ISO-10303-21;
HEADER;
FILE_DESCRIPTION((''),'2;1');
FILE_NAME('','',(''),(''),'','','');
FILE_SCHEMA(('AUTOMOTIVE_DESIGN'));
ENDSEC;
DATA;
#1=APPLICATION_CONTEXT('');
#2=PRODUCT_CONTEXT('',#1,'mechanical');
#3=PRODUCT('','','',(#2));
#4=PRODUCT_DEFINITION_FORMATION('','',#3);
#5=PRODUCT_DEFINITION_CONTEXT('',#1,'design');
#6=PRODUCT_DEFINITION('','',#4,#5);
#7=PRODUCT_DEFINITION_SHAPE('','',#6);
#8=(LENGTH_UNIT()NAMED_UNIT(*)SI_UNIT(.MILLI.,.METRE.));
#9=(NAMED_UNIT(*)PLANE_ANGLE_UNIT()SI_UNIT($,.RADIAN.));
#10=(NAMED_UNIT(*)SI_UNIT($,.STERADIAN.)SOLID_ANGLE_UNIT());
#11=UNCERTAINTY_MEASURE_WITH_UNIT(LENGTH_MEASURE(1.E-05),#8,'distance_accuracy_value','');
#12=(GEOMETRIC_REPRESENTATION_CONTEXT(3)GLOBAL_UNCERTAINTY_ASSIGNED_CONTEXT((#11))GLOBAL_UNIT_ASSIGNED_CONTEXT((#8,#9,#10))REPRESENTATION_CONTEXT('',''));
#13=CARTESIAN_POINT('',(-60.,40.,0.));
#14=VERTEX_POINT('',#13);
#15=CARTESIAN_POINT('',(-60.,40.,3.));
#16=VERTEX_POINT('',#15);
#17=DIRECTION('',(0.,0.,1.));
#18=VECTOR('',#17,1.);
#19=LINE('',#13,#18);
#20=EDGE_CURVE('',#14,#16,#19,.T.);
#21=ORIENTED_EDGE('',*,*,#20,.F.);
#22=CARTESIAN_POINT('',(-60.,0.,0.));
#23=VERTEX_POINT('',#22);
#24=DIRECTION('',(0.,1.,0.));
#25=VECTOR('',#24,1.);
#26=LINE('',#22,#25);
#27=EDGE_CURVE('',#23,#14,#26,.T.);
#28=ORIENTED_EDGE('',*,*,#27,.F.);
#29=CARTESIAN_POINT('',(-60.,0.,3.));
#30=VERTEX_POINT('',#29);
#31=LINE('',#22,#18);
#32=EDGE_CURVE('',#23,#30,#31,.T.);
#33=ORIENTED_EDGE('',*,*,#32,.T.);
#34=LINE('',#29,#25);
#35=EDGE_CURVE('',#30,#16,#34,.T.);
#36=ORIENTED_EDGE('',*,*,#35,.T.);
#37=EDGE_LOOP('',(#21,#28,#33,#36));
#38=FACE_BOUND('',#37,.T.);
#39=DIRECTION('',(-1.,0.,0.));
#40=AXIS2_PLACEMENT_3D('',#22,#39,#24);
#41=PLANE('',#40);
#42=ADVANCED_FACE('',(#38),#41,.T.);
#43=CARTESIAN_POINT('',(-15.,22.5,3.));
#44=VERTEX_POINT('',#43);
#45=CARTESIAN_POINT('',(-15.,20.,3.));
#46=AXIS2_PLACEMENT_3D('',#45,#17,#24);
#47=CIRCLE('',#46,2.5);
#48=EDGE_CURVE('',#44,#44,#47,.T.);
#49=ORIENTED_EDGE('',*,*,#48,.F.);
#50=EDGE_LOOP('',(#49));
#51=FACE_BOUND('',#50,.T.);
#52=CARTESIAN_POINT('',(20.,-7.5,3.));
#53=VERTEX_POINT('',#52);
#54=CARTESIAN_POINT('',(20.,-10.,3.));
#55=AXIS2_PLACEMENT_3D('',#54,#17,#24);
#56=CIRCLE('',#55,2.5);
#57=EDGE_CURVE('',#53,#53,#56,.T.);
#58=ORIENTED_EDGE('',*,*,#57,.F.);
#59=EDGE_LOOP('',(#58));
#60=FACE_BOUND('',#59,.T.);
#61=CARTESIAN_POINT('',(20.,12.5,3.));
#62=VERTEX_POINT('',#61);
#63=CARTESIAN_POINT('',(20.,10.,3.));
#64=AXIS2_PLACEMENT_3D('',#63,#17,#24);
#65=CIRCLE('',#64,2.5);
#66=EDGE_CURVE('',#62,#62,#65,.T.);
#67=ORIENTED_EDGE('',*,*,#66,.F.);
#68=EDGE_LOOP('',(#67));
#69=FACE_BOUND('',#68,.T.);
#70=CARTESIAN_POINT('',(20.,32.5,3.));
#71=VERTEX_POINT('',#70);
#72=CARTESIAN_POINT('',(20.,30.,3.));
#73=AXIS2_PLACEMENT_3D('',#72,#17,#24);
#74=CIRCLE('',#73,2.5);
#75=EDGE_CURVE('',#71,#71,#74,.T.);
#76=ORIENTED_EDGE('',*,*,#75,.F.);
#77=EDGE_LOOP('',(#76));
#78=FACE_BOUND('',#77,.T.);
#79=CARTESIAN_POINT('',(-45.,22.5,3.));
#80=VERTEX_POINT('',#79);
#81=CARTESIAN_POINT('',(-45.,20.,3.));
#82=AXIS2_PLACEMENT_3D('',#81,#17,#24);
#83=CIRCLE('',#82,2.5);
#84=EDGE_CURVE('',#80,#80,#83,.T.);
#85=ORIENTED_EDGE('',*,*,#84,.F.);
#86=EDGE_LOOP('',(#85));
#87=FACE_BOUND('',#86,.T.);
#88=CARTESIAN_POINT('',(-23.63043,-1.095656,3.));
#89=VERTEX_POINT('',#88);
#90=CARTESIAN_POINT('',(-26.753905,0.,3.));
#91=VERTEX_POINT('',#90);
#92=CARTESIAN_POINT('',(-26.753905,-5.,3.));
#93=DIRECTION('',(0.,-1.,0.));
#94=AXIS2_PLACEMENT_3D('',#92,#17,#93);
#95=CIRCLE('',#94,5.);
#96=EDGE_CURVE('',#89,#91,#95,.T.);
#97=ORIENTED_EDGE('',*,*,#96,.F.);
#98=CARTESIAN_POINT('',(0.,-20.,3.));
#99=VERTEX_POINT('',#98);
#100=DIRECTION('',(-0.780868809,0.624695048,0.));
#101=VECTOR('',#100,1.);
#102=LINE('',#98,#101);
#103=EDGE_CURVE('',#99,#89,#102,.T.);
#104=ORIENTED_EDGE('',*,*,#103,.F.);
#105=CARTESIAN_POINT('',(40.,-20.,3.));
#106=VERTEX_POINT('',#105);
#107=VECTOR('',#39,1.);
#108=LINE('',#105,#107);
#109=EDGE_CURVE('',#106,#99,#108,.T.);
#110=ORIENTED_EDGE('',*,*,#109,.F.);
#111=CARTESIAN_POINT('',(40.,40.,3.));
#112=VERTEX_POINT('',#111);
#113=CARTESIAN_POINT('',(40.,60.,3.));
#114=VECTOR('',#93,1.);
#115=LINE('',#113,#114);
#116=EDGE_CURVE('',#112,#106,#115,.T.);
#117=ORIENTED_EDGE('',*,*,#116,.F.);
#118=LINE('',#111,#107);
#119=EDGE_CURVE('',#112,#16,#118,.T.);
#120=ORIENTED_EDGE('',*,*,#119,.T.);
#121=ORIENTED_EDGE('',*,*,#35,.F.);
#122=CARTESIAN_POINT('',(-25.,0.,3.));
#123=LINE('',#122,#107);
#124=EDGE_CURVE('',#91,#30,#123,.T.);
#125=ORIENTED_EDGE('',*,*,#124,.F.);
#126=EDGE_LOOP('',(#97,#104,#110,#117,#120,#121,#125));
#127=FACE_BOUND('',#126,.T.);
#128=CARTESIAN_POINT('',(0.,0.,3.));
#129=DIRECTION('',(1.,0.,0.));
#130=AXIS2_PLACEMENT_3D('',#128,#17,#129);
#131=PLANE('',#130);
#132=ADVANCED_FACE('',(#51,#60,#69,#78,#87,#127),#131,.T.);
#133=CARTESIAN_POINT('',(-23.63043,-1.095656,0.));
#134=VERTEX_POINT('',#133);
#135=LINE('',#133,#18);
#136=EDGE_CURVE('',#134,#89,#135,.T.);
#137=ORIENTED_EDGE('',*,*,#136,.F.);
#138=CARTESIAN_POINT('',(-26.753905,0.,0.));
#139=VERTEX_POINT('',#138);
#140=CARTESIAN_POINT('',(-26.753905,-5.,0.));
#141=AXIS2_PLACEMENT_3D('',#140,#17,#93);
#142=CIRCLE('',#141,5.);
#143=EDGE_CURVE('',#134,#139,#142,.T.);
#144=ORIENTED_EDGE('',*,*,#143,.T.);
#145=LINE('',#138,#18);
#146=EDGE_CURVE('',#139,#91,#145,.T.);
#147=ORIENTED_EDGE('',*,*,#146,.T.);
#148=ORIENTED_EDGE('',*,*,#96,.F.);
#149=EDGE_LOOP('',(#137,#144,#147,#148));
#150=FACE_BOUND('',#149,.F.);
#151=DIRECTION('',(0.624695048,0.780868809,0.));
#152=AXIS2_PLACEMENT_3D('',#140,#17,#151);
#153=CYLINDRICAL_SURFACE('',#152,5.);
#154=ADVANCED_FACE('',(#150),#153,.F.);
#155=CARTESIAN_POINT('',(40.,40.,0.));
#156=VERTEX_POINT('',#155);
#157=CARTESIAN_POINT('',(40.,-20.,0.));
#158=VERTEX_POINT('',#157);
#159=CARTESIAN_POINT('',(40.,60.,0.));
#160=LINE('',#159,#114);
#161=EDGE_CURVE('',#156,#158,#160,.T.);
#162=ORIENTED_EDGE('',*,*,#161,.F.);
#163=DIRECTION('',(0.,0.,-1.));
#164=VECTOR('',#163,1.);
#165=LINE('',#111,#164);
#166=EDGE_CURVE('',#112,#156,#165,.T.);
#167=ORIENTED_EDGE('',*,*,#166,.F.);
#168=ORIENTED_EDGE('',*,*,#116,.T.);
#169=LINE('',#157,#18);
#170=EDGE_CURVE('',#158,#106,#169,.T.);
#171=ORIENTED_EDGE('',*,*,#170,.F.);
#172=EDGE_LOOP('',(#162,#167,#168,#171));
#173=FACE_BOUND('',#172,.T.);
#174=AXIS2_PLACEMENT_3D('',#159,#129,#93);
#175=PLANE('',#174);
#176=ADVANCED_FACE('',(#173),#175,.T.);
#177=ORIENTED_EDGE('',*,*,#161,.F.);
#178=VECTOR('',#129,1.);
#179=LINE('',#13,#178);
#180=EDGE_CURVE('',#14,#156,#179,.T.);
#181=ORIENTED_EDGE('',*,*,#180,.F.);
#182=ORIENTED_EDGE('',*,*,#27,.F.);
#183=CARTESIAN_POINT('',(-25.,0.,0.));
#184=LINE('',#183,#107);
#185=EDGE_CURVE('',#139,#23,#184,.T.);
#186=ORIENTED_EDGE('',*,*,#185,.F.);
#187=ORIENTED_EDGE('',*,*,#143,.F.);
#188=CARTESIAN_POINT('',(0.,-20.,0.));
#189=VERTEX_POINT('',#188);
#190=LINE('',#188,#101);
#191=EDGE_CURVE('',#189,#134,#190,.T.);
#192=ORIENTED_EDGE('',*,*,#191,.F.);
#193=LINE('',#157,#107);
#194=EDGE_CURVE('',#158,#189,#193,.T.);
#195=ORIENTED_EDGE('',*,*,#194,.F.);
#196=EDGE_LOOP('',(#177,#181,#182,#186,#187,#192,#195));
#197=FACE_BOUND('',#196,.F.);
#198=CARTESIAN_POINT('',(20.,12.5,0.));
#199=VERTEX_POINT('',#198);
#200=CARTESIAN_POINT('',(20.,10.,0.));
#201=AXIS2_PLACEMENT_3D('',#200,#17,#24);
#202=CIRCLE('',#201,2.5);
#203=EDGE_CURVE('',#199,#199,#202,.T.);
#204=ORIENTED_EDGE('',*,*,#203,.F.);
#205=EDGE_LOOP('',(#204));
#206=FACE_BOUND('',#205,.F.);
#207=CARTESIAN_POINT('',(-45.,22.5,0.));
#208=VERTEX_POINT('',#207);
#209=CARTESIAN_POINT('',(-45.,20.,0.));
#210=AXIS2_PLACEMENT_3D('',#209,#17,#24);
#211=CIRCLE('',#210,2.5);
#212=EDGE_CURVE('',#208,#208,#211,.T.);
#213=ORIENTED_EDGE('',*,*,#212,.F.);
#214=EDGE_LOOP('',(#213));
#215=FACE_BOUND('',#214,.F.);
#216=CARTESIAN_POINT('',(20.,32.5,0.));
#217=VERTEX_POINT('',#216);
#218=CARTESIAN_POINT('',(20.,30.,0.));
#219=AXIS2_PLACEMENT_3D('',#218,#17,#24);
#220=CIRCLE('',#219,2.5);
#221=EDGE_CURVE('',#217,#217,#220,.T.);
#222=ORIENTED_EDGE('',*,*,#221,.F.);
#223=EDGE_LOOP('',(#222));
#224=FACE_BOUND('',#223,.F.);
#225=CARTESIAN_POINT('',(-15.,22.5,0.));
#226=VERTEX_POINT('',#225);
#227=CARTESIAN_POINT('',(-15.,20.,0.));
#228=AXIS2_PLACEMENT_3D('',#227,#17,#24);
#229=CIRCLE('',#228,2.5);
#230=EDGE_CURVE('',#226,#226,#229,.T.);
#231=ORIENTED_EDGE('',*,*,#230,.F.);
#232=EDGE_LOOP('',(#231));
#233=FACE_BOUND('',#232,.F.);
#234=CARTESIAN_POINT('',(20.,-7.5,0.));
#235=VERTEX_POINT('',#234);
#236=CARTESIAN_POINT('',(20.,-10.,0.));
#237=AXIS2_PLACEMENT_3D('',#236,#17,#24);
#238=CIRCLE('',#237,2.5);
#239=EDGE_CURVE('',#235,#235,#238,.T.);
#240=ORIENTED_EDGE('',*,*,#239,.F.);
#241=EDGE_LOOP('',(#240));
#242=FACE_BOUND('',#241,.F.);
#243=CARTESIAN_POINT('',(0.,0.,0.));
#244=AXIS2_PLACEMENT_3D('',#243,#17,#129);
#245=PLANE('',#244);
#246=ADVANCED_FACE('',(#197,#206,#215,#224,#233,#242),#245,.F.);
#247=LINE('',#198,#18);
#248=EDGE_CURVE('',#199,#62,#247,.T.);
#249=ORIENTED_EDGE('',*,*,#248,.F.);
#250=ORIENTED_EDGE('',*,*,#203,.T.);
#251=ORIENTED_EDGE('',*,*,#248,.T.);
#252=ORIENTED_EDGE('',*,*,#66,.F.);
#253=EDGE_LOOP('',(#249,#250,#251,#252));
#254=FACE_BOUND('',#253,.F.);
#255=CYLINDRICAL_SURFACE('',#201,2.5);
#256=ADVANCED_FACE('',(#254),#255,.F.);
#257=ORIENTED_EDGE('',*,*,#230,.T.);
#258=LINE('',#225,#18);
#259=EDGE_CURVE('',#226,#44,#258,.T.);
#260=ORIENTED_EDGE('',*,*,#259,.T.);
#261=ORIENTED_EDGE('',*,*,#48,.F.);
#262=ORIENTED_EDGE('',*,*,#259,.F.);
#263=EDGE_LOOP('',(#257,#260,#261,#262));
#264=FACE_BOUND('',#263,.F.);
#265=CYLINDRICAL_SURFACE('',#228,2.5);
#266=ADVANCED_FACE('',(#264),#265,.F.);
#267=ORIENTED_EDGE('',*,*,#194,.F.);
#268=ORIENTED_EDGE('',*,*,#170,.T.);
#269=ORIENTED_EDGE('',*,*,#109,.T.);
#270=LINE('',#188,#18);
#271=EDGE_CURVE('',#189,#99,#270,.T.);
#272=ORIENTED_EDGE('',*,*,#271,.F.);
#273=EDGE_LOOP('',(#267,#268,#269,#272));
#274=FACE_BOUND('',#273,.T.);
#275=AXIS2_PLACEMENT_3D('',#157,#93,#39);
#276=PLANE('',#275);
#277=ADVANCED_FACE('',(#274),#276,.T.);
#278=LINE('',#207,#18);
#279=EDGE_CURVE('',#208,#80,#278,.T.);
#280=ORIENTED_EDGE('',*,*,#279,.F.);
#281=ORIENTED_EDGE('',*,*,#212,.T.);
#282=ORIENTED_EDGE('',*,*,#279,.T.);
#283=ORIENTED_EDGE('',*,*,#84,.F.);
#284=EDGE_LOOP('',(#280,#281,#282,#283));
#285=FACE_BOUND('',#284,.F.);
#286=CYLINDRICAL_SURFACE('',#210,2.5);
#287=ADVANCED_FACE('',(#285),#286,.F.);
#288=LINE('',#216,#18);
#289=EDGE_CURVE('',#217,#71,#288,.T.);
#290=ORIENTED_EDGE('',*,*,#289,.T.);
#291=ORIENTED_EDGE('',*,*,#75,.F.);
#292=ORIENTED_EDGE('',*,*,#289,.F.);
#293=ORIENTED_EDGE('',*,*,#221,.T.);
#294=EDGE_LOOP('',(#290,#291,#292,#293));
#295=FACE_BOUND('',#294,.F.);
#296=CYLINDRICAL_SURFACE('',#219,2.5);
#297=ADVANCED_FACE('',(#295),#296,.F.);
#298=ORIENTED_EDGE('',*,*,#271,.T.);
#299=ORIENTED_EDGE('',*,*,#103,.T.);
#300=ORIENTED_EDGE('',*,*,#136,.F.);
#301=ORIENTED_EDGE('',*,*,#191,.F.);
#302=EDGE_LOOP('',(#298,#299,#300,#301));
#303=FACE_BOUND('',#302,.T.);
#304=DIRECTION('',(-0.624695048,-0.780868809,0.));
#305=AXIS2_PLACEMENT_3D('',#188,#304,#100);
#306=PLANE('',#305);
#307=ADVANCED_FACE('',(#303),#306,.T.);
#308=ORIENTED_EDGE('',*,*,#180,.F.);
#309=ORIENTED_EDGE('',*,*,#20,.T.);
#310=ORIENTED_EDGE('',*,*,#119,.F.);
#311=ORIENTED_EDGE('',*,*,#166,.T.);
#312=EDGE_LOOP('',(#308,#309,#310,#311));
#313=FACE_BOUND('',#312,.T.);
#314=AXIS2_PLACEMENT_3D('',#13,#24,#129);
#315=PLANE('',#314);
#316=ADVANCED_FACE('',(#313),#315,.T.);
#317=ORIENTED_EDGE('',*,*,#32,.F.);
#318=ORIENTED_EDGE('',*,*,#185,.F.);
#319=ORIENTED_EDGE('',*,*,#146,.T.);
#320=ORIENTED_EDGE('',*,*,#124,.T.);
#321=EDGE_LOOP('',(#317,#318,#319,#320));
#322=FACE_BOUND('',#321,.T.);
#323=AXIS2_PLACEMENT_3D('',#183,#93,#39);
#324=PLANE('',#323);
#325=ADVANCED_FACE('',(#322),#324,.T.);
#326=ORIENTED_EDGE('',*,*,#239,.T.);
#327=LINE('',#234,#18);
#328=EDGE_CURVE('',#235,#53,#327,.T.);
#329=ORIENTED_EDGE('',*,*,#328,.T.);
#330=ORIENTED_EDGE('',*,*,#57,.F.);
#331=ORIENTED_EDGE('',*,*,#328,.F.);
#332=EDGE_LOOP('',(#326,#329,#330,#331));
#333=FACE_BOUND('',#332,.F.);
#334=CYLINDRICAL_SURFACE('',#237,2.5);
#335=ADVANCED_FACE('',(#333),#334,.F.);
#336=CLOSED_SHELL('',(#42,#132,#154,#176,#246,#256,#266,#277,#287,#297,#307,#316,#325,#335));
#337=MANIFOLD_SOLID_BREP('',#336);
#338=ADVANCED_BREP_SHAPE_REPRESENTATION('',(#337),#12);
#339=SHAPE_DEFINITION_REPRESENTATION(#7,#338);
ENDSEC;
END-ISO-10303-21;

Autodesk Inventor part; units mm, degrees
ref_plane "YZ Plane" through (0, 0, 0) normal (1, 0, 0) x (0, 1, 0)
ref_plane "XZ Plane" through (0, 0, 0) normal (0, 1, 0) x (-1, 0, 0)
ref_plane "XY Plane" through (0, 0, 0) normal (0, 0, 1) x (1, 0, 0)
sketch "Sketch1" plane through (0, 0, 0) normal (0, 0, 1) x (1, 0, 0)
  line L0 (0, 0) -> (0, 40) construction
  line L1 (0, 40) -> (-420, 40) construction
  line L2 (-420, 0) -> (-420, 40) construction
  line L3 (0, 0) -> (-420, 0) construction
  line L4 (40, 120) -> (0, 120) construction
  line L5 (0, 120) -> (0, -730) construction
  line L6 (40, -730) -> (0, -730) construction
  line L7 (40, 120) -> (40, -730) construction
  line L8 (0, 0) -> (40, 0) construction
  line L9 (40, 0) -> (40, 40) construction
  line L10 (40, 40) -> (0, 40) construction
  line L11 (0, 40) -> (0, 0) construction
  line L12 (0, 0) -> (-60, 0) construction
  line L13 (-60, 0) -> (-60, 40) construction
  line L14 (-60, 40) -> (0, 40) construction
  line L15 (0, 40) -> (0, 0) construction
  line L16 (-23.6304, 41.0957) -> (-1.8765, 58.4988) construction
  line L17 (0, 40) -> (40, 40) construction
  line L18 (40, 40) -> (40, 60) construction
  line L19 (40, 60) -> (0, 60) construction
  line L20 (0, 60) -> (0, 40) construction
  line L21 (-1.8765, 58.4988) -> (0, 60) construction
  line L22 (-23.6304, 41.0957) -> (-25, 40) construction
  line L23 (40, 0) -> (0, 0) construction
  line L24 (0, 0) -> (0, -20) construction
  line L25 (0, -20) -> (40, -20) construction
  line L26 (40, -20) -> (40, 0) construction
  line L27 (-25, 40) -> (-25, 0) construction
  line L28 (-25, 0) -> (0, -20) construction
  line L29 (20, -20) -> (20, 60) construction
  line L30 (0, 20) -> (-60, 20) construction
  line L31 (30, 10) -> (10, 10) construction
  line L32 (10, 10) -> (10, -10) construction
  line L33 (10, -10) -> (30, -10) construction
  line L34 (30, -10) -> (30, 10) construction
  line L35 (30, 10) -> (10, -10) construction
  line L36 (10, 10) -> (30, -10) construction
  line L37 (30, 30) -> (10, 30) construction
  line L38 (10, 30) -> (10, 50) construction
  line L39 (10, 50) -> (30, 50) construction
  line L40 (30, 50) -> (30, 30) construction
  line L41 (30, 30) -> (10, 50) construction
  line L42 (10, 30) -> (30, 50) construction
  line L43 (0, -20) -> (-25, 0)
  line L44 (-25, 0) -> (-60, 0)
  line L45 (-60, 0) -> (-60, 40)
  line L46 (-60, 40) -> (-25, 40)
  line L47 (-25, 40) -> (0, 60)
  line L48 (0, 60) -> (40, 60)
  line L49 (40, 60) -> (40, -20)
  line L50 (40, -20) -> (0, -20)
  line L51 (-30, 20) -> (-45, 20)
  line L52 (-30, 20) -> (-15, 20)
  point P0 (20, 0)
  point P1 (20, 0)
  point P2 (20, 40)
  point P3 (20, 30)
  point P4 (20, 10)
  point P5 (20, -10)
  dimension "d0" = 60
  dimension "d1" = 40
  dimension "d2" = 20
  dimension "d3" = 20
  dimension "d6" = 20
  dimension "d7" = 20
  dimension "d8" = 20
  dimension "d9" = 20
  dimension "d20" = 15
  dimension "d21" = 15
extrude "Extrusion1" add sketch "Sketch1" along normal blind 3
hole "Hole1" at (20, -10, 0) at (20, 10, 0) at (20, 30, 0) direction (0, 0, 1) diameter 5 depth 8 tip angle 118
fillet "Fillet1" radius 5 2 edges at (-25, 40, 1.5) (-25, 0, 1.5)
hole "Hole2" at (-45, 20, 0) at (-15, 20, 0) direction (0, 0, 1) diameter 5 depth 8 tip angle 118
sketch "Sketch2" plane through (0, 0, 3) normal (0, 0, 1) x (1, 0, 0)
  circle A0 centre (-45, 20) radius 2.5 projected
  circle A1 centre (-15, 20) radius 2.5 projected
  line L0 (40, -20) -> (40, 60) projected
  line L1 (40, 60) -> (0, 60) projected
  line L2 (0, 60) -> (-23.6304, 41.0957) projected
  arc A2 (-26.7539, 40) -> (-23.6304, 41.0957) centre (-26.7539, 45) ccw projected
  line L3 (-26.7539, 40) -> (-60, 40) projected
  line L4 (-60, 40) -> (-60, 0) projected
  line L5 (-60, 0) -> (-26.7539, 0) projected
  arc A3 (-23.6304, -1.0957) -> (-26.7539, 0) centre (-26.7539, -5) ccw projected
  line L6 (-23.6304, -1.0957) -> (0, -20) projected
  line L7 (0, -20) -> (40, -20) projected
  line L8 (-26.7539, 40) -> (-60, 40) projected
  line L9 (-26.7539, 40) -> (40, 40)
  point P0 (0, 0)
extrude "Extrusion2" cut sketch "Sketch2" against normal blind 3 contours L9 A2 L2 L1 L0
properties part number "bigusset"
